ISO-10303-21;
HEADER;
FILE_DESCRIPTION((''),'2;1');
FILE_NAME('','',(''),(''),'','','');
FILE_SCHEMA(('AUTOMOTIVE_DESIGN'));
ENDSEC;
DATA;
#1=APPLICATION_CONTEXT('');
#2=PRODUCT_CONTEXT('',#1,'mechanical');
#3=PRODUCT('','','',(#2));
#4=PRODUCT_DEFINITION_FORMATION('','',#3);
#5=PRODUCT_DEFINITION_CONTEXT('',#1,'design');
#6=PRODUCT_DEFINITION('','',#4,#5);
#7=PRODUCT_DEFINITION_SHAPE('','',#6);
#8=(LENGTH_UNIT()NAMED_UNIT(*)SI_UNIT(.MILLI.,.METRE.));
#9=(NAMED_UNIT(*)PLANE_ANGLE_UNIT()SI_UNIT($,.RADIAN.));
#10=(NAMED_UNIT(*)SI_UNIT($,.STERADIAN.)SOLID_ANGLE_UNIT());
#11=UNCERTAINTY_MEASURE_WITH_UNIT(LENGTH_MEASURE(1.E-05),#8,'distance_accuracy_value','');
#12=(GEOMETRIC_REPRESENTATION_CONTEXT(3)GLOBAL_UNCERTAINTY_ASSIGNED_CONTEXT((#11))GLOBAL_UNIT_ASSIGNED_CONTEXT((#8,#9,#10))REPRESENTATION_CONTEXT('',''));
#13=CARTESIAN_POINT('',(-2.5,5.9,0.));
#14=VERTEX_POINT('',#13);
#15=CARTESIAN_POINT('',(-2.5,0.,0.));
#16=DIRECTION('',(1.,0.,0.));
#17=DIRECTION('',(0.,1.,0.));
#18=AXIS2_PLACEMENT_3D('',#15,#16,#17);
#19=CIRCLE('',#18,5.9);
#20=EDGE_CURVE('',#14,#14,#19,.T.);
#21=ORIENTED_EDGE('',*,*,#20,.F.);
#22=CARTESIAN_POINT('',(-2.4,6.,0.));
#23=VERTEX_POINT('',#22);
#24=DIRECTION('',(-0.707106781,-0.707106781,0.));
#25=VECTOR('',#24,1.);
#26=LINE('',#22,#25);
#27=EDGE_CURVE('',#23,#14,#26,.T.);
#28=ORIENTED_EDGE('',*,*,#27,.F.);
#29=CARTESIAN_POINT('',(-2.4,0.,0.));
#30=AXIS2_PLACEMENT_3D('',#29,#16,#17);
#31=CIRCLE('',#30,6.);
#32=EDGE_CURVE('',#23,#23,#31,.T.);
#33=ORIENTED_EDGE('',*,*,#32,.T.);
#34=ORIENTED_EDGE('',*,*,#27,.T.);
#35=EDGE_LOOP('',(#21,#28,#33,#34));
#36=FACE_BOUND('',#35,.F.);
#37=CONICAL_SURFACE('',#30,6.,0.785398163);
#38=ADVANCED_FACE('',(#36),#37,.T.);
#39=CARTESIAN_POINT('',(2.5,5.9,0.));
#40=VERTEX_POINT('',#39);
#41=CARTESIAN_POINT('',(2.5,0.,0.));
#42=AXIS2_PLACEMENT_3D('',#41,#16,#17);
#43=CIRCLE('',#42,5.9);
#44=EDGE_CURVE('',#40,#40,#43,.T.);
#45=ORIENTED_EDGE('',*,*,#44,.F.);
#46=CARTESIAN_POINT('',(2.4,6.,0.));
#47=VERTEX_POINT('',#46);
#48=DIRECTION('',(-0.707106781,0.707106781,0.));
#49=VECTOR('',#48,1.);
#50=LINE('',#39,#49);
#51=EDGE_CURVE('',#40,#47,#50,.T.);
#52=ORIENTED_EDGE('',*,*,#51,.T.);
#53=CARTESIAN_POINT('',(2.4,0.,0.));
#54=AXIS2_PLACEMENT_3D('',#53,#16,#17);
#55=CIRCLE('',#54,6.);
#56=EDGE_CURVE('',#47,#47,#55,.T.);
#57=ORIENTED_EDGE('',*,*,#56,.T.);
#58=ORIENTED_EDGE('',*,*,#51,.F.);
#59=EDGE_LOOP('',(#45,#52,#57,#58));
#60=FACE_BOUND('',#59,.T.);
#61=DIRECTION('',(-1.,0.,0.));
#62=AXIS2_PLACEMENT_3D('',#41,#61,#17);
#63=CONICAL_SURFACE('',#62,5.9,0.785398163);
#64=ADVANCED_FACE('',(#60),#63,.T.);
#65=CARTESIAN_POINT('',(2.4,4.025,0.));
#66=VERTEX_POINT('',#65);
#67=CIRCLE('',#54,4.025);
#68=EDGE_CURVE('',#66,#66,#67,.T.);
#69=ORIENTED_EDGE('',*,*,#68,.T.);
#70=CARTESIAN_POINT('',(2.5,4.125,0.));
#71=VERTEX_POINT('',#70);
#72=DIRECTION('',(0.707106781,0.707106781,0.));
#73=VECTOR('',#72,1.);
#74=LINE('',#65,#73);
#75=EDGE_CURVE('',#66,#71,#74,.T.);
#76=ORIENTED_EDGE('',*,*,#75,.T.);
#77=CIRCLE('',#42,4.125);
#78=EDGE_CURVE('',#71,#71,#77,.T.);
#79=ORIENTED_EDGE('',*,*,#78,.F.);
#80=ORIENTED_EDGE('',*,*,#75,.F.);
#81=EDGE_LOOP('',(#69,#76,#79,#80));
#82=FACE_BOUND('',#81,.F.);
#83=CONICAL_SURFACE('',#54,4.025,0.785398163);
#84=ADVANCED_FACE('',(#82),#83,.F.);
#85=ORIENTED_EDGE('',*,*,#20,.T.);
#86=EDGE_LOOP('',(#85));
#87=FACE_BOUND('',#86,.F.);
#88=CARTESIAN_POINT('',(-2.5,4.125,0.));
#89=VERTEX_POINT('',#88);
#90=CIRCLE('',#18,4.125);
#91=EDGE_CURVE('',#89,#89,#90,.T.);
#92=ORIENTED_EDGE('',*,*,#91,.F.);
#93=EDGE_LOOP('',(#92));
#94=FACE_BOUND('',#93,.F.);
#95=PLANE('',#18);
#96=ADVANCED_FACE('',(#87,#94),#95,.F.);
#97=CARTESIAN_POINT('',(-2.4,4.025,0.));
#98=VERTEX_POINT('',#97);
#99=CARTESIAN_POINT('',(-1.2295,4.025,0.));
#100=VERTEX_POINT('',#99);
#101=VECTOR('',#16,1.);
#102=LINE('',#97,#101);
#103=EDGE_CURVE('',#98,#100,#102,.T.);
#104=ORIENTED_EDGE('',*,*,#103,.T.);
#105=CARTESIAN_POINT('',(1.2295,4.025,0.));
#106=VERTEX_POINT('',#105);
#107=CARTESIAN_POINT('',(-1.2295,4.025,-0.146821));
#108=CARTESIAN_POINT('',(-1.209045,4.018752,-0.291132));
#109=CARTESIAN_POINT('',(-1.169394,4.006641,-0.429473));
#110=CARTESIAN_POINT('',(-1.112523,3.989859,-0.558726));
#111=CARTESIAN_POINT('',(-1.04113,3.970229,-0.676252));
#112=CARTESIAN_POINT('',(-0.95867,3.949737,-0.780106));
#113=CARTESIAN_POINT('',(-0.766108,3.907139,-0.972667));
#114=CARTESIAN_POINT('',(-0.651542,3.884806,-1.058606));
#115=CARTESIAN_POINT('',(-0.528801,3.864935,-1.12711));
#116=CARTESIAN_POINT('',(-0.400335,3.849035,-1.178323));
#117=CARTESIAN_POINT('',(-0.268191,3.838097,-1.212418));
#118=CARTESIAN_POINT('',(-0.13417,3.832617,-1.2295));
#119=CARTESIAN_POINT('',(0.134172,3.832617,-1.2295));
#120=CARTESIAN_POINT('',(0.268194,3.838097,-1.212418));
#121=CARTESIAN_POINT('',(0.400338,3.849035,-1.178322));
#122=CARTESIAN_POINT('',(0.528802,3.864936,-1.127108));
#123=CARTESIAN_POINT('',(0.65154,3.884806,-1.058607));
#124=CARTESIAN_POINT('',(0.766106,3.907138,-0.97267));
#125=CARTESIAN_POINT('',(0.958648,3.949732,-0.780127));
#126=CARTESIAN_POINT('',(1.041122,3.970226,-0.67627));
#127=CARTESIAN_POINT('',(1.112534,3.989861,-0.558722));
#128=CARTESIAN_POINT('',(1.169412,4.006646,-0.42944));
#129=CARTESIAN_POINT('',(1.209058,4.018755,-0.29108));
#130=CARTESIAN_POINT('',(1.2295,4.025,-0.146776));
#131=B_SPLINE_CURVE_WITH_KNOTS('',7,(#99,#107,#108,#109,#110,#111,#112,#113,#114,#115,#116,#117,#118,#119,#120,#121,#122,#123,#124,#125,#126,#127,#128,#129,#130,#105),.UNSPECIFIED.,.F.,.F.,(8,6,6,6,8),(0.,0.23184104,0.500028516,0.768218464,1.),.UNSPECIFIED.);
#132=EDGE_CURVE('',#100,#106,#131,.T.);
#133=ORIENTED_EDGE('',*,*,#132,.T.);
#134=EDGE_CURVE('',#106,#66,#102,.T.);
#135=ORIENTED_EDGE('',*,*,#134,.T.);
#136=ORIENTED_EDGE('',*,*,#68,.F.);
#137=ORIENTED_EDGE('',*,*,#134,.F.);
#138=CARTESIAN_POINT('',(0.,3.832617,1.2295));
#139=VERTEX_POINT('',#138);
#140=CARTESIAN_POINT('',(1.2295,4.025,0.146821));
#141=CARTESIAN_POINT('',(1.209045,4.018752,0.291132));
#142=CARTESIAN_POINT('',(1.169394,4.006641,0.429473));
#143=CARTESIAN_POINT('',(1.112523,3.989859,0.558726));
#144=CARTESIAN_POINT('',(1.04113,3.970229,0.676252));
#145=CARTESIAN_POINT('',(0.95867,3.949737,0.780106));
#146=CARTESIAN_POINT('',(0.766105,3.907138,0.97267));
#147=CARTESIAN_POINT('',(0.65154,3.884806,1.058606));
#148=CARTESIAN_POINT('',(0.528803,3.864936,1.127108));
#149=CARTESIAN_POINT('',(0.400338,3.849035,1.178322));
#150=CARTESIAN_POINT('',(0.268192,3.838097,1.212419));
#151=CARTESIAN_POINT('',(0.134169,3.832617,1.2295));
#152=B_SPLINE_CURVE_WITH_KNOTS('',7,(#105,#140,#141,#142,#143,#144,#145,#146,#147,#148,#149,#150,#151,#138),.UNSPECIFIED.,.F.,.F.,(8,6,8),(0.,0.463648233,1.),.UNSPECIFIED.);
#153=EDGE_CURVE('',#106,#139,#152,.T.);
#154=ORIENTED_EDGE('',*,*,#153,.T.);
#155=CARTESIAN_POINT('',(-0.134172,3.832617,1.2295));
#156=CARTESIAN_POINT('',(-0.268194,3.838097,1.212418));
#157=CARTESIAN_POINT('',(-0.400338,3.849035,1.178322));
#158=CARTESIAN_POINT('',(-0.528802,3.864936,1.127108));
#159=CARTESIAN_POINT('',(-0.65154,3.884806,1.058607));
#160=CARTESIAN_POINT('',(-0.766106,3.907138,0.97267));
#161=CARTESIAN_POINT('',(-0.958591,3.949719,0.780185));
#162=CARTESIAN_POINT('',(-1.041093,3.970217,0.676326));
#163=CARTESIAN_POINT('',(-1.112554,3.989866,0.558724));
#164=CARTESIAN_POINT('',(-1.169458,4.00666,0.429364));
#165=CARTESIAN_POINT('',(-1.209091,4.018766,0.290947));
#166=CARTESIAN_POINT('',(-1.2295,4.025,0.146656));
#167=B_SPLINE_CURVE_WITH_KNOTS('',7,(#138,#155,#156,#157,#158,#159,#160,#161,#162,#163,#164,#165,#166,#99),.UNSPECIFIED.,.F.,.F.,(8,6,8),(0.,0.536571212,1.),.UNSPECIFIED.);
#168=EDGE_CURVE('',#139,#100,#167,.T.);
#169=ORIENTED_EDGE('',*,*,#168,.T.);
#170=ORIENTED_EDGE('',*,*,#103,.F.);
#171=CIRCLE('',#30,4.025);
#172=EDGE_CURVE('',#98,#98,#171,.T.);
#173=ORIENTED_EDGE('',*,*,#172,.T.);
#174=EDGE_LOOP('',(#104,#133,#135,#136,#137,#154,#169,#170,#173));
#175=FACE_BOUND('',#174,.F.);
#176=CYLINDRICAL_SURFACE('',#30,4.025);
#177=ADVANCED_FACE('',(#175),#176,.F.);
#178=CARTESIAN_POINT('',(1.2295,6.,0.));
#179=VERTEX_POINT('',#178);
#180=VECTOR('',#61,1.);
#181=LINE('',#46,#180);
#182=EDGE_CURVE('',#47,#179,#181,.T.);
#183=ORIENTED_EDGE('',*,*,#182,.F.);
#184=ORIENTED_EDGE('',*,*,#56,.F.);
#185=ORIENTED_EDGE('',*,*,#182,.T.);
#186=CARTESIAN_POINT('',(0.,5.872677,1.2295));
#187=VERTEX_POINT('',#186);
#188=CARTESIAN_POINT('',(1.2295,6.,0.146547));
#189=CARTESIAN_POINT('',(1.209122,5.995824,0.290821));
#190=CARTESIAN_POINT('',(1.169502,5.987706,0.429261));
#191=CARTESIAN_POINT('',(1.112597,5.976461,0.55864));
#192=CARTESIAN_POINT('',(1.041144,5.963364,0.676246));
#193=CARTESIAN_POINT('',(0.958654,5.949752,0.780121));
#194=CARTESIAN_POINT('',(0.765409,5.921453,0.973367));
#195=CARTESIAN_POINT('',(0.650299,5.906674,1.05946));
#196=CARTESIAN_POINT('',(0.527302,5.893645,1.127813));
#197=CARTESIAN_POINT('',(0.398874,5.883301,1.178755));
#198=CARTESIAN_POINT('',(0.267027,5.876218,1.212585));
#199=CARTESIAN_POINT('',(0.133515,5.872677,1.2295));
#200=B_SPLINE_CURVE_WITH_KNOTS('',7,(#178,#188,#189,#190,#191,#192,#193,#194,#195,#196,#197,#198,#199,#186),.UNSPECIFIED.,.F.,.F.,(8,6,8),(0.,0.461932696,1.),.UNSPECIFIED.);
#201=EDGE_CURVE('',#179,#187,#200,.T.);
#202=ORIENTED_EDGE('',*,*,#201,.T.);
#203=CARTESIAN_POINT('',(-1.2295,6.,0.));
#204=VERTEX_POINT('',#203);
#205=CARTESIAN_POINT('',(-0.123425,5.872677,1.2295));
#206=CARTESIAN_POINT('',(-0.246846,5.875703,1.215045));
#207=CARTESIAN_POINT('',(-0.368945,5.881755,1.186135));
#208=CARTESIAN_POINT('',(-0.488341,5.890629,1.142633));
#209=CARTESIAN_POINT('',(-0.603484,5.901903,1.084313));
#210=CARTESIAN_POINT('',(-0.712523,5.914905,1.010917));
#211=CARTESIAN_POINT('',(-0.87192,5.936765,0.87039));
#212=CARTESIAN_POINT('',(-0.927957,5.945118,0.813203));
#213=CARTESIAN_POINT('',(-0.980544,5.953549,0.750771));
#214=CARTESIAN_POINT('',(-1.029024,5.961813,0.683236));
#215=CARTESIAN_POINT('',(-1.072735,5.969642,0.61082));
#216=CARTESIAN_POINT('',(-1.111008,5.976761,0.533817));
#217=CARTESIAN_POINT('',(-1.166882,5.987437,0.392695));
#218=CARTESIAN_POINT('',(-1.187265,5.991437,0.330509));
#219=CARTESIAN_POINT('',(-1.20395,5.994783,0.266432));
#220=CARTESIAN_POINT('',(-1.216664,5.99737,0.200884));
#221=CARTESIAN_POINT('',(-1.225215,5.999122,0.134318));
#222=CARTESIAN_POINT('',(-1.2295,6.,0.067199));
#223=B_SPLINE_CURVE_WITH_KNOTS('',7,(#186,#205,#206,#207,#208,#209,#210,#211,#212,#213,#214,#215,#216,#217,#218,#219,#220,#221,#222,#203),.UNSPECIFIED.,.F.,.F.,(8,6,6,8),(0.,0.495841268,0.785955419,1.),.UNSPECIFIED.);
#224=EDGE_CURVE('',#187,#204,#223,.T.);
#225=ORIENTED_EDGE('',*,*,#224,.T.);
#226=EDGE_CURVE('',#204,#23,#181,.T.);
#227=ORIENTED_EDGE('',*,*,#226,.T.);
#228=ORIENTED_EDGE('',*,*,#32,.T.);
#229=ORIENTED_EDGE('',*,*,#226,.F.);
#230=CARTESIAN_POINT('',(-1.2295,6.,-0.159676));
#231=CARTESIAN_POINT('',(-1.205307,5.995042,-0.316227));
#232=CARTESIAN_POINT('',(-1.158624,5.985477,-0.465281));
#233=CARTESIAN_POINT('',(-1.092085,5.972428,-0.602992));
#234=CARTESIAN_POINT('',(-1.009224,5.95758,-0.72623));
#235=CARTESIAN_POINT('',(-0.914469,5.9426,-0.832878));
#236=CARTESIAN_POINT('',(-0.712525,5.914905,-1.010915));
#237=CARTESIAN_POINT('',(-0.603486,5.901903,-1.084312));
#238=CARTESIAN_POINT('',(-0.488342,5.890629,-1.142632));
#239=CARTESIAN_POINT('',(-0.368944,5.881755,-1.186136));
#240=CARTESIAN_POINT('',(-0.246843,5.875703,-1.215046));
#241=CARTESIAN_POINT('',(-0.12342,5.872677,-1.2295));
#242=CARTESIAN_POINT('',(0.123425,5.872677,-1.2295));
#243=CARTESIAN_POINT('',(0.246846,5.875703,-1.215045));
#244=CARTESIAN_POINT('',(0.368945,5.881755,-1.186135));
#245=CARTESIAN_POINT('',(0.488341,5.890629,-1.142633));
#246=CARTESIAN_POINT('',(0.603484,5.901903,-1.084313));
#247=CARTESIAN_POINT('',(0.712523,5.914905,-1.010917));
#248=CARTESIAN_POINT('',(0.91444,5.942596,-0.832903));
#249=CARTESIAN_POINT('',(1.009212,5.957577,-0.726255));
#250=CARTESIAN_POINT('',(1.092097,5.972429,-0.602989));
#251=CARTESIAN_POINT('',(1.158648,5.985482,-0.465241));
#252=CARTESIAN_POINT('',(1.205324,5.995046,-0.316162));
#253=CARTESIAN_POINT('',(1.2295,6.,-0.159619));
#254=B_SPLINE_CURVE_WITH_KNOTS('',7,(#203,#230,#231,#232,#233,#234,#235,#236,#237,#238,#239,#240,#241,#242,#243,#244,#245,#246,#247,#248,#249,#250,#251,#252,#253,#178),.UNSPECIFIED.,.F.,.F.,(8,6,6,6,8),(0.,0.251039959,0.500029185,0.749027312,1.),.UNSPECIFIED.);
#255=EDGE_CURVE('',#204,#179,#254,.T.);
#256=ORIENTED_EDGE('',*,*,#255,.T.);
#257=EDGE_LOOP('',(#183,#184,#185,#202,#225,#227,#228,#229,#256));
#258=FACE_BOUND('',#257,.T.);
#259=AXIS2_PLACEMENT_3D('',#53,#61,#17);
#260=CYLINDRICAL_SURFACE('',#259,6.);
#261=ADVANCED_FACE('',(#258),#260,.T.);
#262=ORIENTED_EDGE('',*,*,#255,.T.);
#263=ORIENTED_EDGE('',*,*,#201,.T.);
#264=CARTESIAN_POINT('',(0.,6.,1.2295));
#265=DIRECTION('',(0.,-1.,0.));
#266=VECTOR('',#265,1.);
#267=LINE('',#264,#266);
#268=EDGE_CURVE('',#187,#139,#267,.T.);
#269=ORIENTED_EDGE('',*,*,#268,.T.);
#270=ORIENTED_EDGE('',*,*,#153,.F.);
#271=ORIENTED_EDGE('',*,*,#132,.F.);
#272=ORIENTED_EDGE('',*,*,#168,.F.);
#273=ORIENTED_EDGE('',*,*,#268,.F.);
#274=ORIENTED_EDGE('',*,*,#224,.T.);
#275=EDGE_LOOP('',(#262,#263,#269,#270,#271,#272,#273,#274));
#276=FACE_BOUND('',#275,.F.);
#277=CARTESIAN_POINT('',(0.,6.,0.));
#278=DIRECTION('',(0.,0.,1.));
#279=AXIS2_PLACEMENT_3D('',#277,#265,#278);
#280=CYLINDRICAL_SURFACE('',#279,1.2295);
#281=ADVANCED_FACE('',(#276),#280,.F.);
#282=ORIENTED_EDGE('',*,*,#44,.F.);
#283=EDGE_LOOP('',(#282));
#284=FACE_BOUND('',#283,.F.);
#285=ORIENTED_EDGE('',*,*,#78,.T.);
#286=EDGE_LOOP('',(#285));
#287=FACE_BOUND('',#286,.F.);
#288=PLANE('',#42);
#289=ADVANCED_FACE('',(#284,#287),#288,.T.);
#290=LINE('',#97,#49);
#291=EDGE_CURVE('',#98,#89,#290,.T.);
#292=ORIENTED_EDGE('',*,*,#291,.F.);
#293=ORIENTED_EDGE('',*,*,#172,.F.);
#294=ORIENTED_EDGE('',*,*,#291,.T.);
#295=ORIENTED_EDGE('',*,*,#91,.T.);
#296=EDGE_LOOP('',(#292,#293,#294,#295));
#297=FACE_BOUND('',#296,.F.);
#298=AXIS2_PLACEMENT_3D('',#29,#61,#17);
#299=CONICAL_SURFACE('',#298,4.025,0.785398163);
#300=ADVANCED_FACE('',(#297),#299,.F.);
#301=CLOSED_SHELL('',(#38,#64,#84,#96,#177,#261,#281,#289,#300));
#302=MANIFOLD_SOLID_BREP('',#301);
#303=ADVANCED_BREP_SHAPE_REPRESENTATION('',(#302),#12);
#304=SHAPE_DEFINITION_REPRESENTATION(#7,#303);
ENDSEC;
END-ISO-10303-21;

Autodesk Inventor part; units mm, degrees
ref_plane "YZ Plane" through (0, 0, 0) normal (1, 0, 0) x (0, 1, 0)
ref_plane "XY Plane" through (0, 0, 0) normal (0, 0, 1) x (1, 0, 0)
sketch "Skizze1" plane through (0, 0, 0) normal (0, 0, 1) x (1, 0, 0)
  line L0 (-9.8448, 0) -> (9.4061, 0)
  line L1 (-2.4, 4.025) -> (2.4, 4.025)
  line L2 (2.5, 4.125) -> (2.5, 5.9)
  line L3 (2.4, 6) -> (-2.4, 6)
  line L4 (-2.5, 5.9) -> (-2.5, 4.125)
  line L5 (0, 0) -> (0, 4.025) construction
  line L6 (-2.4, 4.025) -> (-2.5, 4.125)
  line L7 (2.4, 4.025) -> (2.5, 4.125)
  line L8 (2.5, 5.9) -> (2.4, 6)
  line L9 (-2.4, 6) -> (-2.5, 5.9)
  point P0 (-2.5, 4.025)
  point P1 (2.5, 6)
  point P2 (2.5, 4.025)
  point P3 (-2.5, 6)
  dimension "d0" = 0.1
  dimension "d1" = 0.1
  dimension "d2" = 0.1
  dimension "d3" = 0.1
  dimension "d4" = 0.1
  dimension "d5" = 0.1
  dimension "d6" = 0.1
  dimension "d7" = 0.1
  dimension "d8" = 8.05
  dimension "d9" = 12
  dimension "d10" = 5
revolve "Umdrehung1" add sketch "Skizze1" angle 360 about axis through (-9.8448, 0, 0) along (1, 0, 0)
ref_plane "Arbeitsebene1" through (0, 6, 0) normal (0, 1, 0) x (-1, 0, 0)
sketch "Skizze2" plane through (0, 6, 0) normal (0, 1, 0) x (-1, 0, 0)
  point P0 (0, 0)
  point P1 (0, 0)
hole "Bohrung1" at (0, 6, 0) direction (0, -1, 0) diameter 2.459 end up to surface thread size "M3x0.5" class "6H" standard "ANSI Metric M Profile"
equation "\"d1\" = d0"
equation "\"d2\" = d0"
equation "\"d3\" = d2"
equation "\"d4\" = d0"
equation "\"d5\" = d4"
equation "\"d6\" = d0"
equation "\"d7\" = d6"
properties part number "pos-ring_d8_D12_t5_M3_V1" material "Messing, weicher Gelbton"
